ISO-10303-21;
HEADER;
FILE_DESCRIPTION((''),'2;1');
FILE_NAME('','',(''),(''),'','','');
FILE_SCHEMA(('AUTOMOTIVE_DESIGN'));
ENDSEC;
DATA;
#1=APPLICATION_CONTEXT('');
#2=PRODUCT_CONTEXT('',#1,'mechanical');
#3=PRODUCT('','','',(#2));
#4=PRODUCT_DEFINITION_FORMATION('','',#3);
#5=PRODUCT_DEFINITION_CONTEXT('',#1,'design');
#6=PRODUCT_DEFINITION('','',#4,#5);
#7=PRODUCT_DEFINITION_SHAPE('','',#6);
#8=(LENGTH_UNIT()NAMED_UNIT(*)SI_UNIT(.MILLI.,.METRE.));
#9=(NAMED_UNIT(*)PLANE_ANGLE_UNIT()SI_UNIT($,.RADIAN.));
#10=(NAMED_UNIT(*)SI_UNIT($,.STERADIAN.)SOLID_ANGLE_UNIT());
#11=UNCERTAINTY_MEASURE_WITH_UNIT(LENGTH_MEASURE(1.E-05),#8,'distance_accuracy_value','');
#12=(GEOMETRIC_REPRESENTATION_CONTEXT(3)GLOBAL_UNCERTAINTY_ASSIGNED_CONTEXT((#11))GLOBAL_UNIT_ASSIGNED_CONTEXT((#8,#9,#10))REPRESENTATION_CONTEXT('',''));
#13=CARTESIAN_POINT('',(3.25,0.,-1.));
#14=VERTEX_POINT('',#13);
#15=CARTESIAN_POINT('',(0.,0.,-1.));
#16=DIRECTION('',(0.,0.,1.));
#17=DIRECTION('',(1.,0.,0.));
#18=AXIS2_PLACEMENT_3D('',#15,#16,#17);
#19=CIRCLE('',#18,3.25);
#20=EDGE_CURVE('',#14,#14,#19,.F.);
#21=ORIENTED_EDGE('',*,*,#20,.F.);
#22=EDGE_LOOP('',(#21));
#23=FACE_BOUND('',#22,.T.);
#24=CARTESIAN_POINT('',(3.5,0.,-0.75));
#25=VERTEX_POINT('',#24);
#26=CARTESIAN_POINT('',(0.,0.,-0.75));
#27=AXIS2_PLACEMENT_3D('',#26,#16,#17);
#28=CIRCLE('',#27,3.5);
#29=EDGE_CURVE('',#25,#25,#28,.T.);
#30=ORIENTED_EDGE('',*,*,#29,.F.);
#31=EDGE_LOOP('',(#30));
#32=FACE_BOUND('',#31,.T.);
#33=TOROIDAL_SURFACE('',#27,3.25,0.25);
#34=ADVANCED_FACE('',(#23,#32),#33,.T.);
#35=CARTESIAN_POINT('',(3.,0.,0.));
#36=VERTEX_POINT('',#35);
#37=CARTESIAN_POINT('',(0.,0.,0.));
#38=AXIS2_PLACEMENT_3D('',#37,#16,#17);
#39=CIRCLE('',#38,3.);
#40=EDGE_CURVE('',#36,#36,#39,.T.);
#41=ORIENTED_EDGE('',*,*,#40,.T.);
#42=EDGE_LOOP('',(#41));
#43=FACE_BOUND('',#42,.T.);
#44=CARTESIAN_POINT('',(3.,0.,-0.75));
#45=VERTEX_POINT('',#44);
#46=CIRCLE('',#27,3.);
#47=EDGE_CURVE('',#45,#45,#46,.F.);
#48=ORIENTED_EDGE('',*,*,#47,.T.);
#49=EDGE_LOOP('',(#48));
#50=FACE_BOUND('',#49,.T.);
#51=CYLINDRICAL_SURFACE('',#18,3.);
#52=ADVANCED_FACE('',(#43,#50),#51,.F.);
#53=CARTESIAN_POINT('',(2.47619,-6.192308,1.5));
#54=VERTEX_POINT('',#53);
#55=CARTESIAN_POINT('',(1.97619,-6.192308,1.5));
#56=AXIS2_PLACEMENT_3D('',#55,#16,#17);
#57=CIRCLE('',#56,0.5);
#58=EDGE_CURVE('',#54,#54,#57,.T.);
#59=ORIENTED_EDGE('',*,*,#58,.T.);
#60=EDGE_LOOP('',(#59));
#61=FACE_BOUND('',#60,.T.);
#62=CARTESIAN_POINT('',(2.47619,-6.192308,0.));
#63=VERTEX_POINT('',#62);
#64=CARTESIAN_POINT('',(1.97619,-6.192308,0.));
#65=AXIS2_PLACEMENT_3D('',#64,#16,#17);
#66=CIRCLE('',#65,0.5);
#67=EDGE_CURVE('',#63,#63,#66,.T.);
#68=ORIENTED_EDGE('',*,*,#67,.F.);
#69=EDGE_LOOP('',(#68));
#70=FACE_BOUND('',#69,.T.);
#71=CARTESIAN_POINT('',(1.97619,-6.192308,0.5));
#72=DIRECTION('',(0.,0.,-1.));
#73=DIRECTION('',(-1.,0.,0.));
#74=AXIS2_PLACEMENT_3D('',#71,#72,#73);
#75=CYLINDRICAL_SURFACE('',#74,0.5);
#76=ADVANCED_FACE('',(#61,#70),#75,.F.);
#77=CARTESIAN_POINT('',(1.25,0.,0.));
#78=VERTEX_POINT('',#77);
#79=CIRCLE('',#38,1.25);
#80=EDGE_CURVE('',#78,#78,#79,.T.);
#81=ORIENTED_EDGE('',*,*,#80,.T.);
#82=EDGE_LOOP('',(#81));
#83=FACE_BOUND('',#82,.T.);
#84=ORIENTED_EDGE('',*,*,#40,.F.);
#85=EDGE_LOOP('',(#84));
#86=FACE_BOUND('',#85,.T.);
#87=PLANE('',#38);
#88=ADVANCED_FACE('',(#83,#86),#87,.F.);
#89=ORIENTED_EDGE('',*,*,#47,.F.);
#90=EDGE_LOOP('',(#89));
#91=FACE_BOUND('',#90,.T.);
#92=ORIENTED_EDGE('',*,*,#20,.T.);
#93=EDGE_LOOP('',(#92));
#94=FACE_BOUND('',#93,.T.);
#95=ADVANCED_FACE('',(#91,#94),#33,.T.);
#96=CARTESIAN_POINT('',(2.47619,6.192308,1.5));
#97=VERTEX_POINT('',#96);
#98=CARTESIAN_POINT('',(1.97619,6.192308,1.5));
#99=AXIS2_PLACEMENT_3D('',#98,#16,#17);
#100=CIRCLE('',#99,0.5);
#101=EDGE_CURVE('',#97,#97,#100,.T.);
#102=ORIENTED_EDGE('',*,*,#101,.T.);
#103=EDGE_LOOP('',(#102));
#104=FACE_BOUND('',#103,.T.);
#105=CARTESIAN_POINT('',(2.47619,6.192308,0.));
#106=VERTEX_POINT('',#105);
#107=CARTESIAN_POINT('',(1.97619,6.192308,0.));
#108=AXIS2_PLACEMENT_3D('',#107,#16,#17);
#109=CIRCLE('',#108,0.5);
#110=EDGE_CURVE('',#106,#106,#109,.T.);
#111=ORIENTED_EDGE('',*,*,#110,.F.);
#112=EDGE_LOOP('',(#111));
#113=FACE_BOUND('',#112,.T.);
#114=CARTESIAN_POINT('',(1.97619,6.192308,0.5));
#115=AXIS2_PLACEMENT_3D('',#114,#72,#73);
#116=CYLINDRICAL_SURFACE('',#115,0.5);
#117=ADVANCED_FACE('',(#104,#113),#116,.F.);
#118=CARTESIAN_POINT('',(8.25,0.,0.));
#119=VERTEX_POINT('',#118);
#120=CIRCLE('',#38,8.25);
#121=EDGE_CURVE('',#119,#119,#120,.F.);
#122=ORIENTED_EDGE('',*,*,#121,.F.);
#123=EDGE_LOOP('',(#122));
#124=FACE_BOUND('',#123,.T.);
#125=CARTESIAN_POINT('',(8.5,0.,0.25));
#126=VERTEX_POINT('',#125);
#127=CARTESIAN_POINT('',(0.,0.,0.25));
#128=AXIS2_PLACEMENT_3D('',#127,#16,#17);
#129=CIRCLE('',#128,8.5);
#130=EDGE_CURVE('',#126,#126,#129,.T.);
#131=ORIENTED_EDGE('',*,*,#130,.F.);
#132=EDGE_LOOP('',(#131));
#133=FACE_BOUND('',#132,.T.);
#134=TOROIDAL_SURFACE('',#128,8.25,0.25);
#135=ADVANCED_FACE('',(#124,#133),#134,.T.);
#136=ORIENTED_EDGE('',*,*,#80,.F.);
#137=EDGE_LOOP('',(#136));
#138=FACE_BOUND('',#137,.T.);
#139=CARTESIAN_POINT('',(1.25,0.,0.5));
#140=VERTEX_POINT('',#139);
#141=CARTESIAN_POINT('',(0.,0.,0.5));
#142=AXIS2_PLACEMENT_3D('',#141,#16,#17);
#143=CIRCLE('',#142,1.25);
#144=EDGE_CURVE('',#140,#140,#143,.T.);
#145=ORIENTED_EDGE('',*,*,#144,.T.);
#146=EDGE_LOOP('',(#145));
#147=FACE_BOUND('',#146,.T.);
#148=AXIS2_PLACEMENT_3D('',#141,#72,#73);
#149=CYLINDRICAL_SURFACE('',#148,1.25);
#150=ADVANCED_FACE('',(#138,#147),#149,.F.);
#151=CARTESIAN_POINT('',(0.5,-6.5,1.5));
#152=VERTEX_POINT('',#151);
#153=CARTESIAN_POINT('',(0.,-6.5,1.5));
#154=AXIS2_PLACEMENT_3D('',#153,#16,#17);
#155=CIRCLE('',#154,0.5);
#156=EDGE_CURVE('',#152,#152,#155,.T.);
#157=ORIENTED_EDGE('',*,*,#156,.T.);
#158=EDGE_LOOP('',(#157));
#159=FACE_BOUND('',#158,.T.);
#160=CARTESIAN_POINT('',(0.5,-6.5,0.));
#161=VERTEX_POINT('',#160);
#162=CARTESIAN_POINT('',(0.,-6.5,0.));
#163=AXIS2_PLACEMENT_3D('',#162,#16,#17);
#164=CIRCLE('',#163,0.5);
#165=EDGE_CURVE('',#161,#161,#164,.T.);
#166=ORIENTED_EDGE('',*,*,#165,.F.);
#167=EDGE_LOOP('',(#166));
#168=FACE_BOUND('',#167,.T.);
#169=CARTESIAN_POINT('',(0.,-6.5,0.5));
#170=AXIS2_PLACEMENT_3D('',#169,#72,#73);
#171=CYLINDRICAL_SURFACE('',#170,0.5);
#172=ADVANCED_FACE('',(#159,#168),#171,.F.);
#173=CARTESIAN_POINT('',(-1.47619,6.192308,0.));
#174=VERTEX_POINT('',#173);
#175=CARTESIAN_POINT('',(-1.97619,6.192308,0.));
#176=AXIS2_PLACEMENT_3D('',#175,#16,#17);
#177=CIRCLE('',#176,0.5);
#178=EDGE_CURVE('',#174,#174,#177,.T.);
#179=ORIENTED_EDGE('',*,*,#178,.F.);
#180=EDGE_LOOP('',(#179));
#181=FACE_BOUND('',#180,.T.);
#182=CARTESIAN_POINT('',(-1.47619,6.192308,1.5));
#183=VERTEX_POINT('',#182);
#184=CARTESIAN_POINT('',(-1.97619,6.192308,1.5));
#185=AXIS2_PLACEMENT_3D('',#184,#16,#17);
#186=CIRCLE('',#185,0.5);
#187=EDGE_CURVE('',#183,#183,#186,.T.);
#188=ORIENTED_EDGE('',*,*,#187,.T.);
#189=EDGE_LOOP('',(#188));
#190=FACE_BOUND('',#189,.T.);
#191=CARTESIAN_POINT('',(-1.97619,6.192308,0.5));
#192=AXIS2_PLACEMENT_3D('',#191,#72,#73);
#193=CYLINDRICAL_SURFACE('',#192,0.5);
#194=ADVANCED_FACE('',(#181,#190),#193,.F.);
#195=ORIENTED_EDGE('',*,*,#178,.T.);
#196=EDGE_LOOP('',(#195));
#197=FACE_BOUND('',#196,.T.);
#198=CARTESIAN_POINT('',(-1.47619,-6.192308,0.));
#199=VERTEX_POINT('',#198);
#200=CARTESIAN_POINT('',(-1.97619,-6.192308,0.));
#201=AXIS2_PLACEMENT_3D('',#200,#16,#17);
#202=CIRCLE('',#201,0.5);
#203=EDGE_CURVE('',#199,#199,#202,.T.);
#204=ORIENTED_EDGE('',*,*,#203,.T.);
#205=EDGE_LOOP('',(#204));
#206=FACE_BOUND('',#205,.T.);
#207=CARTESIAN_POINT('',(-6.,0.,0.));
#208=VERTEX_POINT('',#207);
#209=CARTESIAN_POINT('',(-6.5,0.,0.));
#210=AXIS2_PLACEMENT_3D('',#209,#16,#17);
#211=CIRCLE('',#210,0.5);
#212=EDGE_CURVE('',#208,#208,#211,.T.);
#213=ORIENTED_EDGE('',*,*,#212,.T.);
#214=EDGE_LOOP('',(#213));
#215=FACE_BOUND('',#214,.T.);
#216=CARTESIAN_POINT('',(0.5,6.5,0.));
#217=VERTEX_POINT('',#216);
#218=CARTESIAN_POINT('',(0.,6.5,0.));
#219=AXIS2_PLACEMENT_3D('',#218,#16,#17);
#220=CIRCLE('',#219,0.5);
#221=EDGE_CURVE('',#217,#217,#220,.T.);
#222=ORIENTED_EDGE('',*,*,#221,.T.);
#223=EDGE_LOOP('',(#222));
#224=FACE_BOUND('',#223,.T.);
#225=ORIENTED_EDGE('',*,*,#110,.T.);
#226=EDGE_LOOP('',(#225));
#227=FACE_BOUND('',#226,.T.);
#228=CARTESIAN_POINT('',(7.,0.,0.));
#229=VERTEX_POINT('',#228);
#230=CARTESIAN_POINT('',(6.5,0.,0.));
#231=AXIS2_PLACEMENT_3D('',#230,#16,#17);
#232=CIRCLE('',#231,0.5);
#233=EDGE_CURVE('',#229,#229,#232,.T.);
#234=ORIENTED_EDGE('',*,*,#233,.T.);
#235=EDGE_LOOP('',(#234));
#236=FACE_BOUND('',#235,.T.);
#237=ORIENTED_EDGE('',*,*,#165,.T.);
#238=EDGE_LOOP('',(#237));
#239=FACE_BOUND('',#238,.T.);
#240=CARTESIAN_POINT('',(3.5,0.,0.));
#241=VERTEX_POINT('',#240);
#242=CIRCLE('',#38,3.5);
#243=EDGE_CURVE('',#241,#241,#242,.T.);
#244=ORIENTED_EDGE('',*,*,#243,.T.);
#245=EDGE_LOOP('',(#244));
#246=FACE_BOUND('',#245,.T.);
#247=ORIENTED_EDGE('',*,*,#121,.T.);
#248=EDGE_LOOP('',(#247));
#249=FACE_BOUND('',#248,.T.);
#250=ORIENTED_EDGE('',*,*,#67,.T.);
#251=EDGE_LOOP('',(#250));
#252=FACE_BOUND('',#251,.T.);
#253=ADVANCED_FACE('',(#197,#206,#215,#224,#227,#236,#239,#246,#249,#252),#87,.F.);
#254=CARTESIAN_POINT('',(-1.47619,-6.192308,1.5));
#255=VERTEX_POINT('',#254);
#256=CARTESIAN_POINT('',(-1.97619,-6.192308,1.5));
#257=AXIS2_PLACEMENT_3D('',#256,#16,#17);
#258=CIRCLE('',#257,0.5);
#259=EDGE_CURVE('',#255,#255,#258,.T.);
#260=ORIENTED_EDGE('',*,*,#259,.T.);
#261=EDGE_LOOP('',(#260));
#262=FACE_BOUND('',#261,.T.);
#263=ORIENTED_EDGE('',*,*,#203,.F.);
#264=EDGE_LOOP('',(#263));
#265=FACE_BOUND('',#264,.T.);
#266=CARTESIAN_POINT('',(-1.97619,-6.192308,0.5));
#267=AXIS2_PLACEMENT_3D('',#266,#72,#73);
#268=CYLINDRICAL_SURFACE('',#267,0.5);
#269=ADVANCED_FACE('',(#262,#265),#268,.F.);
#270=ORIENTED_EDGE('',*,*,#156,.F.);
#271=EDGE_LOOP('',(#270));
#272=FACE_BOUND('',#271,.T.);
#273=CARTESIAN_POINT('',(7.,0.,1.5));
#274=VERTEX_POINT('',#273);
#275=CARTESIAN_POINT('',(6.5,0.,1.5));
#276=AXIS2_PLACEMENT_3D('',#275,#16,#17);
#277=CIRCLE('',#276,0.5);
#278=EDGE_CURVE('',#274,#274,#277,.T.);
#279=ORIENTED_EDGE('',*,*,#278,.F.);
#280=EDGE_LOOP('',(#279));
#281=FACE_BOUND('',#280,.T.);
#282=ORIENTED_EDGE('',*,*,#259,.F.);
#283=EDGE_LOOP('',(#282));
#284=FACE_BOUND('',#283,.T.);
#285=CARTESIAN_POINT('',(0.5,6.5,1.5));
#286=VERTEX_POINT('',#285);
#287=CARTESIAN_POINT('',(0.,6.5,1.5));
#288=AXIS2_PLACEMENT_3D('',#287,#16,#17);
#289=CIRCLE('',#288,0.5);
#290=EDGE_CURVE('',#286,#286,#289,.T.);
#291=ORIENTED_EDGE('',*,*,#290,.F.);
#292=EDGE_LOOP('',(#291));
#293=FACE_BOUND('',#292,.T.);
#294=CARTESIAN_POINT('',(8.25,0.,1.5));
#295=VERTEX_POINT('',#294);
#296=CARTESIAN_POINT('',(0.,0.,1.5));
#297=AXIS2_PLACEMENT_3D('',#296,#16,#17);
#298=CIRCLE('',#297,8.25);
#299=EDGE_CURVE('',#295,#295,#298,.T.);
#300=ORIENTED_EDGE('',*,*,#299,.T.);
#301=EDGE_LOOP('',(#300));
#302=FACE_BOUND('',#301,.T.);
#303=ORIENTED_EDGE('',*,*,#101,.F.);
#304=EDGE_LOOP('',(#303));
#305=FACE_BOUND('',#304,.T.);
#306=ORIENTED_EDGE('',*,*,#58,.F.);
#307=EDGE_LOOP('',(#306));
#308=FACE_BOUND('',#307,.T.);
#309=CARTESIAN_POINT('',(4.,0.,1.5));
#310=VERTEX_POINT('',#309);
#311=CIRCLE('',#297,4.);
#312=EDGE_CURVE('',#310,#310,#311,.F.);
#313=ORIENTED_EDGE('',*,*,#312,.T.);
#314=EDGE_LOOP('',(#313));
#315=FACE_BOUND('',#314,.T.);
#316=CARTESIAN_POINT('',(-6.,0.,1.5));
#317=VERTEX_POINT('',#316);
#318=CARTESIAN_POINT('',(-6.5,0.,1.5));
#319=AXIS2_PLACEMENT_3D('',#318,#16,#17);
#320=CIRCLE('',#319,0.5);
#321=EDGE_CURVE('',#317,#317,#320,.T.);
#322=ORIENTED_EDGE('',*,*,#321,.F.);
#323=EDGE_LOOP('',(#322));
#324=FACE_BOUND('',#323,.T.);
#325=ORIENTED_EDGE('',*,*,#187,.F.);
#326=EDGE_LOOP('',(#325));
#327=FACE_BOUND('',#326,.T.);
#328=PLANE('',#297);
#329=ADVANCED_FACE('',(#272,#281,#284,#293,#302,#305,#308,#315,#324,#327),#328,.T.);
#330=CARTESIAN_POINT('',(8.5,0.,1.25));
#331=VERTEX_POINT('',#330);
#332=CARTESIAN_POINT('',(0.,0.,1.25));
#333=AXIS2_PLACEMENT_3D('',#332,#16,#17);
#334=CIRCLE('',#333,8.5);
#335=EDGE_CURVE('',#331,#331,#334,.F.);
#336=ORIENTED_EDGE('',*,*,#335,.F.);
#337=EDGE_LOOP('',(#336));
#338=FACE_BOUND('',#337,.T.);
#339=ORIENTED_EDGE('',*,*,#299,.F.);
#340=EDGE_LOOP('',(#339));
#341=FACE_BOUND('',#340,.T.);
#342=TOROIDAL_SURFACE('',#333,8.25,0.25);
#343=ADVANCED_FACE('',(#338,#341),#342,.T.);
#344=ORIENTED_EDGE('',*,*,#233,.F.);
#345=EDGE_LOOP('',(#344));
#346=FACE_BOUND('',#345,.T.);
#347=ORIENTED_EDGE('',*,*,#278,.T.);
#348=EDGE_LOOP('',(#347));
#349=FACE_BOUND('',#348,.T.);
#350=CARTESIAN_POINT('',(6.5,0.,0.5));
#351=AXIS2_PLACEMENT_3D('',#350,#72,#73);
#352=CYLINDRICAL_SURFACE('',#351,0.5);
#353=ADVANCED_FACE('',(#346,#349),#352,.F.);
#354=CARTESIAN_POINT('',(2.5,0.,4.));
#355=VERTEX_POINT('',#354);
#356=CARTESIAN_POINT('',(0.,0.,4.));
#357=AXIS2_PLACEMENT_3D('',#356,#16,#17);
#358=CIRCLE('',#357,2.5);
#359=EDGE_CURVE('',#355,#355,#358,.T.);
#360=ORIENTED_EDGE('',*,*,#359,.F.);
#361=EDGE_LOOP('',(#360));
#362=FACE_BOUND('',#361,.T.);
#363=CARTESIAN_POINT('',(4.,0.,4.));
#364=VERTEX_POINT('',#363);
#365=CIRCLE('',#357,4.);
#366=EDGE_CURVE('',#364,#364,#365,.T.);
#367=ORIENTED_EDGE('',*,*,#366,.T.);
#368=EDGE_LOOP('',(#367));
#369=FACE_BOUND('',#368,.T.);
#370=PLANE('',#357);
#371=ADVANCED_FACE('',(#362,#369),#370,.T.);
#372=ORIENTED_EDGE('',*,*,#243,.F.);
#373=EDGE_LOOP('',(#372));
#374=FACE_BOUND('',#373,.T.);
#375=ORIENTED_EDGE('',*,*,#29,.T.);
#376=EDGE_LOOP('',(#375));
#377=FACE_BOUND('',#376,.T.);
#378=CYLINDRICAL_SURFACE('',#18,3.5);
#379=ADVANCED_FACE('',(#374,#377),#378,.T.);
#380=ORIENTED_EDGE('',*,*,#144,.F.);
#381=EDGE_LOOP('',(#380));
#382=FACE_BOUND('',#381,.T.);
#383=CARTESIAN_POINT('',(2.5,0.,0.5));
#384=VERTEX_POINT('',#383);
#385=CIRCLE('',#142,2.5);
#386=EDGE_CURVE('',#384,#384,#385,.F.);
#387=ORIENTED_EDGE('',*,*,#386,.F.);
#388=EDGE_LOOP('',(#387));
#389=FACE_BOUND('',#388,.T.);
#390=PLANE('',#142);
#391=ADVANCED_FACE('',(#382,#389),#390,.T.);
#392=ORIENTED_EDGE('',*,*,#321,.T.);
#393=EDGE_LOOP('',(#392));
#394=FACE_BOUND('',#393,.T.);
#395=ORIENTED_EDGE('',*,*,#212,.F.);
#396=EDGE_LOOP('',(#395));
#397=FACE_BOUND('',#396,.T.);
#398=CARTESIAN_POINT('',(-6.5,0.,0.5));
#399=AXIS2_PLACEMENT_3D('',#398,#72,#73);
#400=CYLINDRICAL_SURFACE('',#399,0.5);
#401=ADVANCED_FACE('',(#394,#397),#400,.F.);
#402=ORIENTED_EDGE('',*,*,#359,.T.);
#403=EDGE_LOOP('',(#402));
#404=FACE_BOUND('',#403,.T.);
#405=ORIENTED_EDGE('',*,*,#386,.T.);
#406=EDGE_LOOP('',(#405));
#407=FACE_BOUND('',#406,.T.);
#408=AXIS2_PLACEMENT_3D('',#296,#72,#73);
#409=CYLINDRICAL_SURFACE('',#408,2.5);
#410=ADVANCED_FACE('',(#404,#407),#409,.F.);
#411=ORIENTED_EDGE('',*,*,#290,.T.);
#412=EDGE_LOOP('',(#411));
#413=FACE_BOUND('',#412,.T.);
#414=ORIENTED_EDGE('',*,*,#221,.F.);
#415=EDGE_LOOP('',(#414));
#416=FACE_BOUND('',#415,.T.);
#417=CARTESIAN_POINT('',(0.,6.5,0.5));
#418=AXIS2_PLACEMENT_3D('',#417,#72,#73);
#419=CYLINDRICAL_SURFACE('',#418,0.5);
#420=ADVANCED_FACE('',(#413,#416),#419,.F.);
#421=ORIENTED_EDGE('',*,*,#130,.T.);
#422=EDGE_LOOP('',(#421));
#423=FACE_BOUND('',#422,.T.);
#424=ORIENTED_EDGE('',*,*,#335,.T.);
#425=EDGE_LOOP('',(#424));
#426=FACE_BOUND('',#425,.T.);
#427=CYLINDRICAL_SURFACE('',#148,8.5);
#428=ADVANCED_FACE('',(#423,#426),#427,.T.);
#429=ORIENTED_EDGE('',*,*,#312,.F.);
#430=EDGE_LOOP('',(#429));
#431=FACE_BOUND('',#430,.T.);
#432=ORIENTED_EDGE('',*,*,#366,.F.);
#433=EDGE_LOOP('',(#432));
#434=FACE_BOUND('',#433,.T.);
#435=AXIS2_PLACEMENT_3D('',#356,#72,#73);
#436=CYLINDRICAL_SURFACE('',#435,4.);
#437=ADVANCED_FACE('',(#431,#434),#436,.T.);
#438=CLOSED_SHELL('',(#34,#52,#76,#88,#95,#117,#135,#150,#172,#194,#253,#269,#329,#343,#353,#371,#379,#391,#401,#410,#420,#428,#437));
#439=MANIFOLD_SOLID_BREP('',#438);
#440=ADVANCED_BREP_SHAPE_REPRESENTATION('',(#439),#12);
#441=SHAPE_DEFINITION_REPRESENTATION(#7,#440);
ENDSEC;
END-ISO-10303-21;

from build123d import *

# Parameters (mm, degrees)
SKETCH1_R           = 8.5
SKETCH1_R_2         = 4
SKETCH1_R_3         = 0.5
SKETCH1_R_4         = 3.5
SKETCH1_R_5         = 3
SKETCH1_R_6         = 2.5
SKETCH1_R_7         = 1.25
BOSS_EXTRUDE1_DEPTH = 0.5
SKETCH1_4_R         = 8.5
SKETCH1_4_R_2       = 4
SKETCH1_4_R_3       = 0.5
SKETCH1_4_R_4       = 3.5
SKETCH1_4_R_5       = 3
SKETCH1_4_R_6       = 2.5
BOSS_EXTRUDE2_DEPTH = 1.5
SKETCH1_5_R         = 4
SKETCH1_5_R_2       = 3.5
SKETCH1_5_R_3       = 3
SKETCH1_5_R_4       = 2.5
BOSS_EXTRUDE3_DEPTH = 4
SKETCH1_6_R         = 3.5
SKETCH1_6_R_2       = 3
BOSS_EXTRUDE4_DEPTH = 1
FILLET1_R           = 0.25


with BuildPart() as part:
    # Sketch1 → Boss-Extrude1 (new body)
    # profile 1 of 5: a face of its own
    with BuildSketch(Plane.XY):
        Circle(SKETCH1_R)
        Circle(SKETCH1_R_2, mode=Mode.SUBTRACT)
        with Locations((1.976189627, -6.192307692)):
            Circle(SKETCH1_R_3, mode=Mode.SUBTRACT)
        with Locations((-1.976189627, -6.192307692)):
            Circle(SKETCH1_R_3, mode=Mode.SUBTRACT)
        with Locations((1.976189627, 6.192307692)):
            Circle(SKETCH1_R_3, mode=Mode.SUBTRACT)
        with Locations((-1.976189627, 6.192307692)):
            Circle(SKETCH1_R_3, mode=Mode.SUBTRACT)
        with Locations((6.5, 0)):
            Circle(SKETCH1_R_3, mode=Mode.SUBTRACT)
        with Locations((-6.5, 0)):
            Circle(SKETCH1_R_3, mode=Mode.SUBTRACT)
        with Locations((0, -6.5)):
            Circle(SKETCH1_R_3, mode=Mode.SUBTRACT)
        with Locations((0, 6.5)):
            Circle(SKETCH1_R_3, mode=Mode.SUBTRACT)
    # profile 2 of 5: a face of its own
    with BuildSketch(Plane.XY):
        Circle(SKETCH1_R_2)
        Circle(SKETCH1_R_4, mode=Mode.SUBTRACT)
    # profile 3 of 5: a face of its own
    with BuildSketch(Plane.XY):
        Circle(SKETCH1_R_4)
        Circle(SKETCH1_R_5, mode=Mode.SUBTRACT)
    # profile 4 of 5: a face of its own
    with BuildSketch(Plane.XY):
        Circle(SKETCH1_R_5)
        Circle(SKETCH1_R_6, mode=Mode.SUBTRACT)
    # profile 5 of 5: a face of its own
    with BuildSketch(Plane.XY):
        Circle(SKETCH1_R_6)
        Circle(SKETCH1_R_7, mode=Mode.SUBTRACT)
    extrude(amount=BOSS_EXTRUDE1_DEPTH)

    # Sketch1<4> → Boss-Extrude2 (add)
    # profile 1 of 4: a face of its own
    with BuildSketch(Plane.XY):
        Circle(SKETCH1_4_R)
        Circle(SKETCH1_4_R_2, mode=Mode.SUBTRACT)
        with Locations((1.976189627, -6.192307692)):
            Circle(SKETCH1_4_R_3, mode=Mode.SUBTRACT)
        with Locations((-1.976189627, -6.192307692)):
            Circle(SKETCH1_4_R_3, mode=Mode.SUBTRACT)
        with Locations((1.976189627, 6.192307692)):
            Circle(SKETCH1_4_R_3, mode=Mode.SUBTRACT)
        with Locations((-1.976189627, 6.192307692)):
            Circle(SKETCH1_4_R_3, mode=Mode.SUBTRACT)
        with Locations((6.5, 0)):
            Circle(SKETCH1_4_R_3, mode=Mode.SUBTRACT)
        with Locations((-6.5, 0)):
            Circle(SKETCH1_4_R_3, mode=Mode.SUBTRACT)
        with Locations((0, -6.5)):
            Circle(SKETCH1_4_R_3, mode=Mode.SUBTRACT)
        with Locations((0, 6.5)):
            Circle(SKETCH1_4_R_3, mode=Mode.SUBTRACT)
    # profile 2 of 4: a face of its own
    with BuildSketch(Plane.XY):
        Circle(SKETCH1_4_R_2)
        Circle(SKETCH1_4_R_4, mode=Mode.SUBTRACT)
    # profile 3 of 4: a face of its own
    with BuildSketch(Plane.XY):
        Circle(SKETCH1_4_R_4)
        Circle(SKETCH1_4_R_5, mode=Mode.SUBTRACT)
    # profile 4 of 4: a face of its own
    with BuildSketch(Plane.XY):
        Circle(SKETCH1_4_R_5)
        Circle(SKETCH1_4_R_6, mode=Mode.SUBTRACT)
    extrude(amount=BOSS_EXTRUDE2_DEPTH)

    # Sketch1<5> → Boss-Extrude3 (add)
    # profile 1 of 3: a face of its own
    with BuildSketch(Plane.XY):
        Circle(SKETCH1_5_R)
        Circle(SKETCH1_5_R_2, mode=Mode.SUBTRACT)
    # profile 2 of 3: a face of its own
    with BuildSketch(Plane.XY):
        Circle(SKETCH1_5_R_2)
        Circle(SKETCH1_5_R_3, mode=Mode.SUBTRACT)
    # profile 3 of 3: a face of its own
    with BuildSketch(Plane.XY):
        Circle(SKETCH1_5_R_3)
        Circle(SKETCH1_5_R_4, mode=Mode.SUBTRACT)
    extrude(amount=BOSS_EXTRUDE3_DEPTH)

    # Sketch1<6> → Boss-Extrude4 (add)
    with BuildSketch(Plane.XY):
        Circle(SKETCH1_6_R)
        Circle(SKETCH1_6_R_2, mode=Mode.SUBTRACT)
    extrude(amount=-BOSS_EXTRUDE4_DEPTH)

    # Fillet1
    fillet1_edges = [part.edges().sort_by_distance(p)[0] for p in [
        (-8.5, 0, 0),
        (-8.5, 0, 1.5),
        (-3.5, 0, -1),
        (-3, 0, -1),
    ]]
    fillet(fillet1_edges, radius=FILLET1_R - 0.0001)  # a hair under: the kernel refuses the full size


solid = part.part
